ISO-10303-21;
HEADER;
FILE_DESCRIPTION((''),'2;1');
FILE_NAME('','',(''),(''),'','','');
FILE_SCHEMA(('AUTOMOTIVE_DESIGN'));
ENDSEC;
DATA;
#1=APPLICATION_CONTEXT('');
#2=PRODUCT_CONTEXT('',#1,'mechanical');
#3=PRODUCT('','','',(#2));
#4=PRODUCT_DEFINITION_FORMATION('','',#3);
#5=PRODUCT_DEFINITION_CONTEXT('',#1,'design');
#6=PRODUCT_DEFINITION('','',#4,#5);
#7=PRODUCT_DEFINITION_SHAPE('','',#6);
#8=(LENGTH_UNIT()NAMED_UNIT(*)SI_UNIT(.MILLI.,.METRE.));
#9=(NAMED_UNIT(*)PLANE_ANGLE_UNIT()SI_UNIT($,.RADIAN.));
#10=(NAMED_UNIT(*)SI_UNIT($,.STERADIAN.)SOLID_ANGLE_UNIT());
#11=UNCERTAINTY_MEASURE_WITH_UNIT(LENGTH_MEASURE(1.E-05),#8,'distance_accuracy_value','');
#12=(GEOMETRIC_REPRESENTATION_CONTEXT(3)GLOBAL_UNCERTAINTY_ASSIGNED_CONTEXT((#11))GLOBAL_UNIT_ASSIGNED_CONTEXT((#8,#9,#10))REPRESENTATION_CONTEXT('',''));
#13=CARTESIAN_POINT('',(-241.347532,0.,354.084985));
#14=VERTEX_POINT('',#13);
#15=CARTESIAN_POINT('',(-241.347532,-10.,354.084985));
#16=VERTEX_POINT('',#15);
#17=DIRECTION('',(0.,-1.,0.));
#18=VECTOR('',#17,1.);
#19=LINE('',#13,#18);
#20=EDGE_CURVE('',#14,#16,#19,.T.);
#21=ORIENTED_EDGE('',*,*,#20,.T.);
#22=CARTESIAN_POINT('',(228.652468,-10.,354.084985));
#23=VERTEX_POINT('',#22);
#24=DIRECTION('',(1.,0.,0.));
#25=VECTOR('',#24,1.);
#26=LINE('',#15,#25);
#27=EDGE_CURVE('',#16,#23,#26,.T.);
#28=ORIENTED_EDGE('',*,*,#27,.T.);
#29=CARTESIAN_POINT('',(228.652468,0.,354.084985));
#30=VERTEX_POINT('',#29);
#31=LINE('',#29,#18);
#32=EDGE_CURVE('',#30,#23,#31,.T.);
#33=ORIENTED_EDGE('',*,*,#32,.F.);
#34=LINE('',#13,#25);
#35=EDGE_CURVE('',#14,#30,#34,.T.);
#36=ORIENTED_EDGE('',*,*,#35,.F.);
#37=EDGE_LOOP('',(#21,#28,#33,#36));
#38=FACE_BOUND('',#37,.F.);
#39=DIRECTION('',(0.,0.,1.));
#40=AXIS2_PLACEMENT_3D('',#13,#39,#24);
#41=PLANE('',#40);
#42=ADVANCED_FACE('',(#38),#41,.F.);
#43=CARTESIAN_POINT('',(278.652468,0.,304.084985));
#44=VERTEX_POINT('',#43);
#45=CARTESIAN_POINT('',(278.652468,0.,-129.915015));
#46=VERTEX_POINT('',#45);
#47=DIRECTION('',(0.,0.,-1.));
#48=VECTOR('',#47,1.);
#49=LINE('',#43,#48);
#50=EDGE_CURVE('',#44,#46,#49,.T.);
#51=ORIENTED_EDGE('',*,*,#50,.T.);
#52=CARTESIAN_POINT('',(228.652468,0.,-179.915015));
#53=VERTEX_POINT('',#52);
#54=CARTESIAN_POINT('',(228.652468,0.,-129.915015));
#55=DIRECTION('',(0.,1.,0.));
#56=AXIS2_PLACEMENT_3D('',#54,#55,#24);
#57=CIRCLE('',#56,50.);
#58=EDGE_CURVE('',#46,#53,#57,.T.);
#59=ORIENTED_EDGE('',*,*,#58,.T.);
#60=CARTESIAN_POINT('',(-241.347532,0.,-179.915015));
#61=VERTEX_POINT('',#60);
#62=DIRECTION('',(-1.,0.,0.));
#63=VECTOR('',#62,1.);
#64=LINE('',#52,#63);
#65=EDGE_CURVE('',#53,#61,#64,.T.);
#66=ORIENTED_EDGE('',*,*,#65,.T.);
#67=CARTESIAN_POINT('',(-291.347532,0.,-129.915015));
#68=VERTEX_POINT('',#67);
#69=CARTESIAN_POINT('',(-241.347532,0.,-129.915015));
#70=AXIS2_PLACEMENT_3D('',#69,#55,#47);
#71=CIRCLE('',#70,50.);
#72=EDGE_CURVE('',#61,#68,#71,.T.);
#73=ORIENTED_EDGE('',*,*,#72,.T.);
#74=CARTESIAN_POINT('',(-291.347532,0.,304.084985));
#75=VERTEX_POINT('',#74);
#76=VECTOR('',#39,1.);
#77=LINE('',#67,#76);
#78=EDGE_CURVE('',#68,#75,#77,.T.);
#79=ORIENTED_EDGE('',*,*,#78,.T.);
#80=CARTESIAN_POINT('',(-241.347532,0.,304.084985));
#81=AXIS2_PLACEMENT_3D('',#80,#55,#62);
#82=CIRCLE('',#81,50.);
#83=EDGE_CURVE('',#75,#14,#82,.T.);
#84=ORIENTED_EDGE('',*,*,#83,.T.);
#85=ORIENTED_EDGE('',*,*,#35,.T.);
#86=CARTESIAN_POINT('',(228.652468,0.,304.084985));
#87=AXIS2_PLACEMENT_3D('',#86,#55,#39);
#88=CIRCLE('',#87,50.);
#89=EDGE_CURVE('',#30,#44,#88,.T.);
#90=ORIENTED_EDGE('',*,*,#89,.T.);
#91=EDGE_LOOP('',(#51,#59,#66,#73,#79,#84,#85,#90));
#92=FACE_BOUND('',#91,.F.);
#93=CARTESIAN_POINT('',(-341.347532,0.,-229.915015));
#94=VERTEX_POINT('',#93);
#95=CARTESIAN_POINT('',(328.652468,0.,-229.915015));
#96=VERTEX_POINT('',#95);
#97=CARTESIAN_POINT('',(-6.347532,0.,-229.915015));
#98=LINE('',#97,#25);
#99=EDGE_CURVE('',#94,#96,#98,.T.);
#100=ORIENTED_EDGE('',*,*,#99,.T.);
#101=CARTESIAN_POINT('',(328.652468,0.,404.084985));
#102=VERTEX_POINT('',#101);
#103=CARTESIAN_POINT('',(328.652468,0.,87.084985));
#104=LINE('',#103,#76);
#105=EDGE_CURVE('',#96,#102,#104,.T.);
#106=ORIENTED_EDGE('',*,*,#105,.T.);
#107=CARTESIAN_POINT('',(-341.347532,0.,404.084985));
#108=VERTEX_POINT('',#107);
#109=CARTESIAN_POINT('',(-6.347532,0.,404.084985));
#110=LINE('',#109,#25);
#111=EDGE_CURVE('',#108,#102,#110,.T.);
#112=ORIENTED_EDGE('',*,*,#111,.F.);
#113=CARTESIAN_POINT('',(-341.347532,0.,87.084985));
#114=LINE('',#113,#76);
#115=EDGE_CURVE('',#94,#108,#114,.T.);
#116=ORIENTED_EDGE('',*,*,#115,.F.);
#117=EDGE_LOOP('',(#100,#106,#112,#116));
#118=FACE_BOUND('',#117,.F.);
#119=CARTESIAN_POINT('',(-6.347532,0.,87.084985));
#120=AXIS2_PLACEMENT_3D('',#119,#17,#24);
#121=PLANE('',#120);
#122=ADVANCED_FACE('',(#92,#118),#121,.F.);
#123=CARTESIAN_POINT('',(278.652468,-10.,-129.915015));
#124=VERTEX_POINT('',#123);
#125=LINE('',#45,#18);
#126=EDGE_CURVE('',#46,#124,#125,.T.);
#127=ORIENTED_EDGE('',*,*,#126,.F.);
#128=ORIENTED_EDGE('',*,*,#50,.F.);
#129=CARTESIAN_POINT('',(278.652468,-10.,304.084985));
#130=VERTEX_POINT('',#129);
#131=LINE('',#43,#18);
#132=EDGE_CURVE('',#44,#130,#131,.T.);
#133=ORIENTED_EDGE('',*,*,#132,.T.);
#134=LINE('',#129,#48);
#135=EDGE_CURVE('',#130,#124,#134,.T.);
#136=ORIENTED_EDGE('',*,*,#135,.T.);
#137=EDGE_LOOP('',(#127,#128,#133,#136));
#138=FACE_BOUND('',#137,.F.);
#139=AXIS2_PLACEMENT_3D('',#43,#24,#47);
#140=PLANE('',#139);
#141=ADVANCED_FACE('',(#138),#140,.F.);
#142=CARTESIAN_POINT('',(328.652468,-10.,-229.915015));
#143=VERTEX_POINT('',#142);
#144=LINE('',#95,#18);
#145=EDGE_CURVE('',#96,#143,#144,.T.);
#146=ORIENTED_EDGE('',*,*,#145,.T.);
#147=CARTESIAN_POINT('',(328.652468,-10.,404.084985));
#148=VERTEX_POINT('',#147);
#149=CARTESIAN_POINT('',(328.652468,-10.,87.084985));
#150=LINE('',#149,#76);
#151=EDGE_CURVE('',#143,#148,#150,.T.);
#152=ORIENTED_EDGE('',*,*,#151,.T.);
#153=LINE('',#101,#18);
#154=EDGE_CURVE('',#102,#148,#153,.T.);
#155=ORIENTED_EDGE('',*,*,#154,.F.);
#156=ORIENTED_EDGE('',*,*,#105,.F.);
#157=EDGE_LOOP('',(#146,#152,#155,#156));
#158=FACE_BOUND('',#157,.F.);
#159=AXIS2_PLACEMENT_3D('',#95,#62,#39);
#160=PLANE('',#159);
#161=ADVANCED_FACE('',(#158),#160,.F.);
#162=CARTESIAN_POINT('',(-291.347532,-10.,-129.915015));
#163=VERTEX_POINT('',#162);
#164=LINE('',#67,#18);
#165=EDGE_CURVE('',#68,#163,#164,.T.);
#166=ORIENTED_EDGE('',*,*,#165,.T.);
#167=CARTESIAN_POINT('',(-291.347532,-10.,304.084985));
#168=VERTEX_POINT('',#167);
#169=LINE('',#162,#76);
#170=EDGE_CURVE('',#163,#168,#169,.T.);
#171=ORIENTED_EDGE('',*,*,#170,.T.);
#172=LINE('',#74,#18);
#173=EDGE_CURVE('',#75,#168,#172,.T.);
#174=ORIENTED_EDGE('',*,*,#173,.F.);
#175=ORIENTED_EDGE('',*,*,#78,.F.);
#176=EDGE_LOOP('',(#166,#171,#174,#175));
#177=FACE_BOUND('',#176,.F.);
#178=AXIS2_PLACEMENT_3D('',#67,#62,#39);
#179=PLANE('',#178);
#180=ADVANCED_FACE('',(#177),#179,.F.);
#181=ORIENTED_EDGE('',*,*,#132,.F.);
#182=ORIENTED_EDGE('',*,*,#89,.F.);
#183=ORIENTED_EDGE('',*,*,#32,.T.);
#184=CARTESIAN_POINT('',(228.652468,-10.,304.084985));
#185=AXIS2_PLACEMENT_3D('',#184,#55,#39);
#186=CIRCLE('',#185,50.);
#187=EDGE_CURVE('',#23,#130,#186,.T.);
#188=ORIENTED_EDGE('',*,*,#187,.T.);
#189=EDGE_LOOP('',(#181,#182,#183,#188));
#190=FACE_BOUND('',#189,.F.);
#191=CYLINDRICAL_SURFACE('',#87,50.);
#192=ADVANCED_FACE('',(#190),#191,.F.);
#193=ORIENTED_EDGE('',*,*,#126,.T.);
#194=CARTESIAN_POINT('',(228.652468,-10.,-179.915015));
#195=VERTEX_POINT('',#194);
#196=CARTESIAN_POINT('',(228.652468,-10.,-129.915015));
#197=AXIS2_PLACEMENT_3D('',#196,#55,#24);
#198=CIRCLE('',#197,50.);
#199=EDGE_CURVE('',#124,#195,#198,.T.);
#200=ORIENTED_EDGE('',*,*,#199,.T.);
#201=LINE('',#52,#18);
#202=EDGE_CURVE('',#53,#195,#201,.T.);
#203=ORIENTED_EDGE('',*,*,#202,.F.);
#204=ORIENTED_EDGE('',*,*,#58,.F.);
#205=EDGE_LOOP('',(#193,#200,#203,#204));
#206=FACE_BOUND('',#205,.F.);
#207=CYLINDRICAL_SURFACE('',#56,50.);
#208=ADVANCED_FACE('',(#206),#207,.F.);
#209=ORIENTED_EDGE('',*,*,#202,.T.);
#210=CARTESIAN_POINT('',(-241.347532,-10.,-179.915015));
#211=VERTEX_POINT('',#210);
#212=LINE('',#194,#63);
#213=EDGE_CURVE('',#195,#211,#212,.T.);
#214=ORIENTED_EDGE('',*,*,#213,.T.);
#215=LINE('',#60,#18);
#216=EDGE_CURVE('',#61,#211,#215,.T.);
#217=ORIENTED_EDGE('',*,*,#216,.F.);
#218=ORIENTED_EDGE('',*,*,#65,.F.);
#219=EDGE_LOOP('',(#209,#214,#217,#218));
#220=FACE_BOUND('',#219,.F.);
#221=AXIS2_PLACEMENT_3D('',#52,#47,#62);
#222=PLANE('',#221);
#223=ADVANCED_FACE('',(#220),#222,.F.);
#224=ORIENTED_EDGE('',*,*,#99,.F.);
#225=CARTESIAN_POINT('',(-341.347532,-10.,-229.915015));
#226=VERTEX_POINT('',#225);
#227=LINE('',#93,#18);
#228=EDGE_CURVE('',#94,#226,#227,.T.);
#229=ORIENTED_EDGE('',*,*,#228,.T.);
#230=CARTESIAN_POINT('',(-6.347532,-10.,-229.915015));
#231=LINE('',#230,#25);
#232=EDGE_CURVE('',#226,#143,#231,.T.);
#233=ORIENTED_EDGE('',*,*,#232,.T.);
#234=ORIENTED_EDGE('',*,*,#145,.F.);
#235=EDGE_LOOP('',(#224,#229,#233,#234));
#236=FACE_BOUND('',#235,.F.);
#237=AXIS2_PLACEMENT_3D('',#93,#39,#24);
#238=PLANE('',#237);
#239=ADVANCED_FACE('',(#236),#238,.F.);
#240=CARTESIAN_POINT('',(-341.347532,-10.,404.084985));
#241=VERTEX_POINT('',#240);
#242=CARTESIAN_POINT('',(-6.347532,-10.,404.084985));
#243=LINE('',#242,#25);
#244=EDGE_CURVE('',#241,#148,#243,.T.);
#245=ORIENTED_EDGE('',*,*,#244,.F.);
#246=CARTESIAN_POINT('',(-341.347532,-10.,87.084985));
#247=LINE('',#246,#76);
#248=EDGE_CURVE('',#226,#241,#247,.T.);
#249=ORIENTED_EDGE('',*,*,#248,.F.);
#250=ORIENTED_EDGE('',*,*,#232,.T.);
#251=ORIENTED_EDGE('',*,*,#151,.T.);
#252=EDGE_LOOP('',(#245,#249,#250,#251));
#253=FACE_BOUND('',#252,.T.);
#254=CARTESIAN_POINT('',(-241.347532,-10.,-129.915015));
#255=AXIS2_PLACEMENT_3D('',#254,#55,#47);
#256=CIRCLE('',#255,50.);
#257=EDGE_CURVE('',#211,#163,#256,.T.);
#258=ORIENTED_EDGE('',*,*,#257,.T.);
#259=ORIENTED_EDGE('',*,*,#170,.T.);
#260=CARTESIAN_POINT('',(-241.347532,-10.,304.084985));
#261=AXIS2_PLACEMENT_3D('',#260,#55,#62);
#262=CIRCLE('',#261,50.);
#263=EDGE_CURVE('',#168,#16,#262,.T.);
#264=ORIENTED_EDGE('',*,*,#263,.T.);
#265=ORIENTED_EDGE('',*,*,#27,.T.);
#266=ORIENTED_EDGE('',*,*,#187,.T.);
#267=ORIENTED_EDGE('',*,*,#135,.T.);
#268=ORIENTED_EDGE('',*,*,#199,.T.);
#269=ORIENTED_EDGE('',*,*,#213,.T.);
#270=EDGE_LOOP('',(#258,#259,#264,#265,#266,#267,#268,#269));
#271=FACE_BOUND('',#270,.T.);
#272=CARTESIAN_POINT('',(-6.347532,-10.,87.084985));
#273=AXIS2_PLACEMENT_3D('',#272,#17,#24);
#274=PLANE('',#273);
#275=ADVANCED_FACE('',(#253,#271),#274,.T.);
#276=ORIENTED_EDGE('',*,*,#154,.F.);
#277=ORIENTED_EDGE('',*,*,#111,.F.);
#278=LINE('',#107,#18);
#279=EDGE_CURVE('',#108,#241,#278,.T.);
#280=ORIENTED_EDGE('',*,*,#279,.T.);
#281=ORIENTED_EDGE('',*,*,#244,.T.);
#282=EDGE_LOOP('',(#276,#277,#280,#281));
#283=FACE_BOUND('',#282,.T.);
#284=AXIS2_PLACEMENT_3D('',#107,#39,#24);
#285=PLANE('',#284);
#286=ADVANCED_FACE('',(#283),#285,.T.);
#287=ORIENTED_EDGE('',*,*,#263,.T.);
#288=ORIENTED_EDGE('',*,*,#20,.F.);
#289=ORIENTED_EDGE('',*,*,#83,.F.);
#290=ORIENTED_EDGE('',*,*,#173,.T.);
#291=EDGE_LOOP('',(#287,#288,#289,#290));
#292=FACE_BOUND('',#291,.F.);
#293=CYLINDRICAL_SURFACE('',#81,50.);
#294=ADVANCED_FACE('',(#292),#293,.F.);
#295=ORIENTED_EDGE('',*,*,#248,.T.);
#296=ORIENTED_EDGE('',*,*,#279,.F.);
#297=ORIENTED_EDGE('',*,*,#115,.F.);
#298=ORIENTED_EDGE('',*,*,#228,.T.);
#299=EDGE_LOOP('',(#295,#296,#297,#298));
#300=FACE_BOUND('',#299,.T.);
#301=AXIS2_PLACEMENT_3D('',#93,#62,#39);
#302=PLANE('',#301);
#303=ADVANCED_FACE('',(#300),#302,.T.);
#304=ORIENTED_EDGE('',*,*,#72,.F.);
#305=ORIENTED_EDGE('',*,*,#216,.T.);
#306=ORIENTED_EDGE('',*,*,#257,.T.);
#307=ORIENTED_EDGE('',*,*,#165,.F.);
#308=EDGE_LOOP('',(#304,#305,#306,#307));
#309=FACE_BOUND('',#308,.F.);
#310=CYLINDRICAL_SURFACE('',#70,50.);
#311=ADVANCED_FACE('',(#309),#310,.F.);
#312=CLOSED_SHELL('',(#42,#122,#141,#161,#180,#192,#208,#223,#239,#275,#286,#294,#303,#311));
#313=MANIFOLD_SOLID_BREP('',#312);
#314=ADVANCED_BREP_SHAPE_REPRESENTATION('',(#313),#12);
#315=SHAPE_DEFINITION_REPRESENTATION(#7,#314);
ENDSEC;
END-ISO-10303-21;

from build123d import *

# Parameters (mm, degrees)
F0_W     = 670
F0_H     = 634
F1_DEPTH = 10


# Not quite as in the source:
# - a feature names something its author has since deleted; it is built from what else it names


with BuildPart() as f1:
    # F0 (on Front) → F1 (new body)
    with BuildSketch(Plane.XZ):
        with Locations((-6.3475316763, 87.0849853243)):
            Rectangle(F0_W, F0_H)
        with BuildLine():
            ThreePointArc((-291.3475316763, 304.0849853243), (-276.7028707356, 339.4403243836), (-241.3475316763, 354.0849853243))
            Line((-241.3475316763, 354.0849853243), (228.6524683237, 354.0849853243))
            ThreePointArc((228.6524683237, 354.0849853243), (264.007807383, 339.4403243836), (278.6524683237, 304.0849853243))
            Line((278.6524683237, 304.0849853243), (278.6524683237, -129.9150146759))
            ThreePointArc((278.6524683237, -129.9150146759), (264.007807383, -165.2703537352), (228.6524683237, -179.9150146759))
            Line((228.6524683237, -179.9150146759), (-241.3475316763, -179.9150146759))
            ThreePointArc((-241.3475316763, -179.9150146759), (-276.7028707356, -165.2703537352), (-291.3475316763, -129.9150146759))
            Line((-291.3475316763, -129.9150146759), (-291.3475316763, 304.0849853243))
        make_face(mode=Mode.SUBTRACT)
    extrude(amount=F1_DEPTH)


solid = f1.part
